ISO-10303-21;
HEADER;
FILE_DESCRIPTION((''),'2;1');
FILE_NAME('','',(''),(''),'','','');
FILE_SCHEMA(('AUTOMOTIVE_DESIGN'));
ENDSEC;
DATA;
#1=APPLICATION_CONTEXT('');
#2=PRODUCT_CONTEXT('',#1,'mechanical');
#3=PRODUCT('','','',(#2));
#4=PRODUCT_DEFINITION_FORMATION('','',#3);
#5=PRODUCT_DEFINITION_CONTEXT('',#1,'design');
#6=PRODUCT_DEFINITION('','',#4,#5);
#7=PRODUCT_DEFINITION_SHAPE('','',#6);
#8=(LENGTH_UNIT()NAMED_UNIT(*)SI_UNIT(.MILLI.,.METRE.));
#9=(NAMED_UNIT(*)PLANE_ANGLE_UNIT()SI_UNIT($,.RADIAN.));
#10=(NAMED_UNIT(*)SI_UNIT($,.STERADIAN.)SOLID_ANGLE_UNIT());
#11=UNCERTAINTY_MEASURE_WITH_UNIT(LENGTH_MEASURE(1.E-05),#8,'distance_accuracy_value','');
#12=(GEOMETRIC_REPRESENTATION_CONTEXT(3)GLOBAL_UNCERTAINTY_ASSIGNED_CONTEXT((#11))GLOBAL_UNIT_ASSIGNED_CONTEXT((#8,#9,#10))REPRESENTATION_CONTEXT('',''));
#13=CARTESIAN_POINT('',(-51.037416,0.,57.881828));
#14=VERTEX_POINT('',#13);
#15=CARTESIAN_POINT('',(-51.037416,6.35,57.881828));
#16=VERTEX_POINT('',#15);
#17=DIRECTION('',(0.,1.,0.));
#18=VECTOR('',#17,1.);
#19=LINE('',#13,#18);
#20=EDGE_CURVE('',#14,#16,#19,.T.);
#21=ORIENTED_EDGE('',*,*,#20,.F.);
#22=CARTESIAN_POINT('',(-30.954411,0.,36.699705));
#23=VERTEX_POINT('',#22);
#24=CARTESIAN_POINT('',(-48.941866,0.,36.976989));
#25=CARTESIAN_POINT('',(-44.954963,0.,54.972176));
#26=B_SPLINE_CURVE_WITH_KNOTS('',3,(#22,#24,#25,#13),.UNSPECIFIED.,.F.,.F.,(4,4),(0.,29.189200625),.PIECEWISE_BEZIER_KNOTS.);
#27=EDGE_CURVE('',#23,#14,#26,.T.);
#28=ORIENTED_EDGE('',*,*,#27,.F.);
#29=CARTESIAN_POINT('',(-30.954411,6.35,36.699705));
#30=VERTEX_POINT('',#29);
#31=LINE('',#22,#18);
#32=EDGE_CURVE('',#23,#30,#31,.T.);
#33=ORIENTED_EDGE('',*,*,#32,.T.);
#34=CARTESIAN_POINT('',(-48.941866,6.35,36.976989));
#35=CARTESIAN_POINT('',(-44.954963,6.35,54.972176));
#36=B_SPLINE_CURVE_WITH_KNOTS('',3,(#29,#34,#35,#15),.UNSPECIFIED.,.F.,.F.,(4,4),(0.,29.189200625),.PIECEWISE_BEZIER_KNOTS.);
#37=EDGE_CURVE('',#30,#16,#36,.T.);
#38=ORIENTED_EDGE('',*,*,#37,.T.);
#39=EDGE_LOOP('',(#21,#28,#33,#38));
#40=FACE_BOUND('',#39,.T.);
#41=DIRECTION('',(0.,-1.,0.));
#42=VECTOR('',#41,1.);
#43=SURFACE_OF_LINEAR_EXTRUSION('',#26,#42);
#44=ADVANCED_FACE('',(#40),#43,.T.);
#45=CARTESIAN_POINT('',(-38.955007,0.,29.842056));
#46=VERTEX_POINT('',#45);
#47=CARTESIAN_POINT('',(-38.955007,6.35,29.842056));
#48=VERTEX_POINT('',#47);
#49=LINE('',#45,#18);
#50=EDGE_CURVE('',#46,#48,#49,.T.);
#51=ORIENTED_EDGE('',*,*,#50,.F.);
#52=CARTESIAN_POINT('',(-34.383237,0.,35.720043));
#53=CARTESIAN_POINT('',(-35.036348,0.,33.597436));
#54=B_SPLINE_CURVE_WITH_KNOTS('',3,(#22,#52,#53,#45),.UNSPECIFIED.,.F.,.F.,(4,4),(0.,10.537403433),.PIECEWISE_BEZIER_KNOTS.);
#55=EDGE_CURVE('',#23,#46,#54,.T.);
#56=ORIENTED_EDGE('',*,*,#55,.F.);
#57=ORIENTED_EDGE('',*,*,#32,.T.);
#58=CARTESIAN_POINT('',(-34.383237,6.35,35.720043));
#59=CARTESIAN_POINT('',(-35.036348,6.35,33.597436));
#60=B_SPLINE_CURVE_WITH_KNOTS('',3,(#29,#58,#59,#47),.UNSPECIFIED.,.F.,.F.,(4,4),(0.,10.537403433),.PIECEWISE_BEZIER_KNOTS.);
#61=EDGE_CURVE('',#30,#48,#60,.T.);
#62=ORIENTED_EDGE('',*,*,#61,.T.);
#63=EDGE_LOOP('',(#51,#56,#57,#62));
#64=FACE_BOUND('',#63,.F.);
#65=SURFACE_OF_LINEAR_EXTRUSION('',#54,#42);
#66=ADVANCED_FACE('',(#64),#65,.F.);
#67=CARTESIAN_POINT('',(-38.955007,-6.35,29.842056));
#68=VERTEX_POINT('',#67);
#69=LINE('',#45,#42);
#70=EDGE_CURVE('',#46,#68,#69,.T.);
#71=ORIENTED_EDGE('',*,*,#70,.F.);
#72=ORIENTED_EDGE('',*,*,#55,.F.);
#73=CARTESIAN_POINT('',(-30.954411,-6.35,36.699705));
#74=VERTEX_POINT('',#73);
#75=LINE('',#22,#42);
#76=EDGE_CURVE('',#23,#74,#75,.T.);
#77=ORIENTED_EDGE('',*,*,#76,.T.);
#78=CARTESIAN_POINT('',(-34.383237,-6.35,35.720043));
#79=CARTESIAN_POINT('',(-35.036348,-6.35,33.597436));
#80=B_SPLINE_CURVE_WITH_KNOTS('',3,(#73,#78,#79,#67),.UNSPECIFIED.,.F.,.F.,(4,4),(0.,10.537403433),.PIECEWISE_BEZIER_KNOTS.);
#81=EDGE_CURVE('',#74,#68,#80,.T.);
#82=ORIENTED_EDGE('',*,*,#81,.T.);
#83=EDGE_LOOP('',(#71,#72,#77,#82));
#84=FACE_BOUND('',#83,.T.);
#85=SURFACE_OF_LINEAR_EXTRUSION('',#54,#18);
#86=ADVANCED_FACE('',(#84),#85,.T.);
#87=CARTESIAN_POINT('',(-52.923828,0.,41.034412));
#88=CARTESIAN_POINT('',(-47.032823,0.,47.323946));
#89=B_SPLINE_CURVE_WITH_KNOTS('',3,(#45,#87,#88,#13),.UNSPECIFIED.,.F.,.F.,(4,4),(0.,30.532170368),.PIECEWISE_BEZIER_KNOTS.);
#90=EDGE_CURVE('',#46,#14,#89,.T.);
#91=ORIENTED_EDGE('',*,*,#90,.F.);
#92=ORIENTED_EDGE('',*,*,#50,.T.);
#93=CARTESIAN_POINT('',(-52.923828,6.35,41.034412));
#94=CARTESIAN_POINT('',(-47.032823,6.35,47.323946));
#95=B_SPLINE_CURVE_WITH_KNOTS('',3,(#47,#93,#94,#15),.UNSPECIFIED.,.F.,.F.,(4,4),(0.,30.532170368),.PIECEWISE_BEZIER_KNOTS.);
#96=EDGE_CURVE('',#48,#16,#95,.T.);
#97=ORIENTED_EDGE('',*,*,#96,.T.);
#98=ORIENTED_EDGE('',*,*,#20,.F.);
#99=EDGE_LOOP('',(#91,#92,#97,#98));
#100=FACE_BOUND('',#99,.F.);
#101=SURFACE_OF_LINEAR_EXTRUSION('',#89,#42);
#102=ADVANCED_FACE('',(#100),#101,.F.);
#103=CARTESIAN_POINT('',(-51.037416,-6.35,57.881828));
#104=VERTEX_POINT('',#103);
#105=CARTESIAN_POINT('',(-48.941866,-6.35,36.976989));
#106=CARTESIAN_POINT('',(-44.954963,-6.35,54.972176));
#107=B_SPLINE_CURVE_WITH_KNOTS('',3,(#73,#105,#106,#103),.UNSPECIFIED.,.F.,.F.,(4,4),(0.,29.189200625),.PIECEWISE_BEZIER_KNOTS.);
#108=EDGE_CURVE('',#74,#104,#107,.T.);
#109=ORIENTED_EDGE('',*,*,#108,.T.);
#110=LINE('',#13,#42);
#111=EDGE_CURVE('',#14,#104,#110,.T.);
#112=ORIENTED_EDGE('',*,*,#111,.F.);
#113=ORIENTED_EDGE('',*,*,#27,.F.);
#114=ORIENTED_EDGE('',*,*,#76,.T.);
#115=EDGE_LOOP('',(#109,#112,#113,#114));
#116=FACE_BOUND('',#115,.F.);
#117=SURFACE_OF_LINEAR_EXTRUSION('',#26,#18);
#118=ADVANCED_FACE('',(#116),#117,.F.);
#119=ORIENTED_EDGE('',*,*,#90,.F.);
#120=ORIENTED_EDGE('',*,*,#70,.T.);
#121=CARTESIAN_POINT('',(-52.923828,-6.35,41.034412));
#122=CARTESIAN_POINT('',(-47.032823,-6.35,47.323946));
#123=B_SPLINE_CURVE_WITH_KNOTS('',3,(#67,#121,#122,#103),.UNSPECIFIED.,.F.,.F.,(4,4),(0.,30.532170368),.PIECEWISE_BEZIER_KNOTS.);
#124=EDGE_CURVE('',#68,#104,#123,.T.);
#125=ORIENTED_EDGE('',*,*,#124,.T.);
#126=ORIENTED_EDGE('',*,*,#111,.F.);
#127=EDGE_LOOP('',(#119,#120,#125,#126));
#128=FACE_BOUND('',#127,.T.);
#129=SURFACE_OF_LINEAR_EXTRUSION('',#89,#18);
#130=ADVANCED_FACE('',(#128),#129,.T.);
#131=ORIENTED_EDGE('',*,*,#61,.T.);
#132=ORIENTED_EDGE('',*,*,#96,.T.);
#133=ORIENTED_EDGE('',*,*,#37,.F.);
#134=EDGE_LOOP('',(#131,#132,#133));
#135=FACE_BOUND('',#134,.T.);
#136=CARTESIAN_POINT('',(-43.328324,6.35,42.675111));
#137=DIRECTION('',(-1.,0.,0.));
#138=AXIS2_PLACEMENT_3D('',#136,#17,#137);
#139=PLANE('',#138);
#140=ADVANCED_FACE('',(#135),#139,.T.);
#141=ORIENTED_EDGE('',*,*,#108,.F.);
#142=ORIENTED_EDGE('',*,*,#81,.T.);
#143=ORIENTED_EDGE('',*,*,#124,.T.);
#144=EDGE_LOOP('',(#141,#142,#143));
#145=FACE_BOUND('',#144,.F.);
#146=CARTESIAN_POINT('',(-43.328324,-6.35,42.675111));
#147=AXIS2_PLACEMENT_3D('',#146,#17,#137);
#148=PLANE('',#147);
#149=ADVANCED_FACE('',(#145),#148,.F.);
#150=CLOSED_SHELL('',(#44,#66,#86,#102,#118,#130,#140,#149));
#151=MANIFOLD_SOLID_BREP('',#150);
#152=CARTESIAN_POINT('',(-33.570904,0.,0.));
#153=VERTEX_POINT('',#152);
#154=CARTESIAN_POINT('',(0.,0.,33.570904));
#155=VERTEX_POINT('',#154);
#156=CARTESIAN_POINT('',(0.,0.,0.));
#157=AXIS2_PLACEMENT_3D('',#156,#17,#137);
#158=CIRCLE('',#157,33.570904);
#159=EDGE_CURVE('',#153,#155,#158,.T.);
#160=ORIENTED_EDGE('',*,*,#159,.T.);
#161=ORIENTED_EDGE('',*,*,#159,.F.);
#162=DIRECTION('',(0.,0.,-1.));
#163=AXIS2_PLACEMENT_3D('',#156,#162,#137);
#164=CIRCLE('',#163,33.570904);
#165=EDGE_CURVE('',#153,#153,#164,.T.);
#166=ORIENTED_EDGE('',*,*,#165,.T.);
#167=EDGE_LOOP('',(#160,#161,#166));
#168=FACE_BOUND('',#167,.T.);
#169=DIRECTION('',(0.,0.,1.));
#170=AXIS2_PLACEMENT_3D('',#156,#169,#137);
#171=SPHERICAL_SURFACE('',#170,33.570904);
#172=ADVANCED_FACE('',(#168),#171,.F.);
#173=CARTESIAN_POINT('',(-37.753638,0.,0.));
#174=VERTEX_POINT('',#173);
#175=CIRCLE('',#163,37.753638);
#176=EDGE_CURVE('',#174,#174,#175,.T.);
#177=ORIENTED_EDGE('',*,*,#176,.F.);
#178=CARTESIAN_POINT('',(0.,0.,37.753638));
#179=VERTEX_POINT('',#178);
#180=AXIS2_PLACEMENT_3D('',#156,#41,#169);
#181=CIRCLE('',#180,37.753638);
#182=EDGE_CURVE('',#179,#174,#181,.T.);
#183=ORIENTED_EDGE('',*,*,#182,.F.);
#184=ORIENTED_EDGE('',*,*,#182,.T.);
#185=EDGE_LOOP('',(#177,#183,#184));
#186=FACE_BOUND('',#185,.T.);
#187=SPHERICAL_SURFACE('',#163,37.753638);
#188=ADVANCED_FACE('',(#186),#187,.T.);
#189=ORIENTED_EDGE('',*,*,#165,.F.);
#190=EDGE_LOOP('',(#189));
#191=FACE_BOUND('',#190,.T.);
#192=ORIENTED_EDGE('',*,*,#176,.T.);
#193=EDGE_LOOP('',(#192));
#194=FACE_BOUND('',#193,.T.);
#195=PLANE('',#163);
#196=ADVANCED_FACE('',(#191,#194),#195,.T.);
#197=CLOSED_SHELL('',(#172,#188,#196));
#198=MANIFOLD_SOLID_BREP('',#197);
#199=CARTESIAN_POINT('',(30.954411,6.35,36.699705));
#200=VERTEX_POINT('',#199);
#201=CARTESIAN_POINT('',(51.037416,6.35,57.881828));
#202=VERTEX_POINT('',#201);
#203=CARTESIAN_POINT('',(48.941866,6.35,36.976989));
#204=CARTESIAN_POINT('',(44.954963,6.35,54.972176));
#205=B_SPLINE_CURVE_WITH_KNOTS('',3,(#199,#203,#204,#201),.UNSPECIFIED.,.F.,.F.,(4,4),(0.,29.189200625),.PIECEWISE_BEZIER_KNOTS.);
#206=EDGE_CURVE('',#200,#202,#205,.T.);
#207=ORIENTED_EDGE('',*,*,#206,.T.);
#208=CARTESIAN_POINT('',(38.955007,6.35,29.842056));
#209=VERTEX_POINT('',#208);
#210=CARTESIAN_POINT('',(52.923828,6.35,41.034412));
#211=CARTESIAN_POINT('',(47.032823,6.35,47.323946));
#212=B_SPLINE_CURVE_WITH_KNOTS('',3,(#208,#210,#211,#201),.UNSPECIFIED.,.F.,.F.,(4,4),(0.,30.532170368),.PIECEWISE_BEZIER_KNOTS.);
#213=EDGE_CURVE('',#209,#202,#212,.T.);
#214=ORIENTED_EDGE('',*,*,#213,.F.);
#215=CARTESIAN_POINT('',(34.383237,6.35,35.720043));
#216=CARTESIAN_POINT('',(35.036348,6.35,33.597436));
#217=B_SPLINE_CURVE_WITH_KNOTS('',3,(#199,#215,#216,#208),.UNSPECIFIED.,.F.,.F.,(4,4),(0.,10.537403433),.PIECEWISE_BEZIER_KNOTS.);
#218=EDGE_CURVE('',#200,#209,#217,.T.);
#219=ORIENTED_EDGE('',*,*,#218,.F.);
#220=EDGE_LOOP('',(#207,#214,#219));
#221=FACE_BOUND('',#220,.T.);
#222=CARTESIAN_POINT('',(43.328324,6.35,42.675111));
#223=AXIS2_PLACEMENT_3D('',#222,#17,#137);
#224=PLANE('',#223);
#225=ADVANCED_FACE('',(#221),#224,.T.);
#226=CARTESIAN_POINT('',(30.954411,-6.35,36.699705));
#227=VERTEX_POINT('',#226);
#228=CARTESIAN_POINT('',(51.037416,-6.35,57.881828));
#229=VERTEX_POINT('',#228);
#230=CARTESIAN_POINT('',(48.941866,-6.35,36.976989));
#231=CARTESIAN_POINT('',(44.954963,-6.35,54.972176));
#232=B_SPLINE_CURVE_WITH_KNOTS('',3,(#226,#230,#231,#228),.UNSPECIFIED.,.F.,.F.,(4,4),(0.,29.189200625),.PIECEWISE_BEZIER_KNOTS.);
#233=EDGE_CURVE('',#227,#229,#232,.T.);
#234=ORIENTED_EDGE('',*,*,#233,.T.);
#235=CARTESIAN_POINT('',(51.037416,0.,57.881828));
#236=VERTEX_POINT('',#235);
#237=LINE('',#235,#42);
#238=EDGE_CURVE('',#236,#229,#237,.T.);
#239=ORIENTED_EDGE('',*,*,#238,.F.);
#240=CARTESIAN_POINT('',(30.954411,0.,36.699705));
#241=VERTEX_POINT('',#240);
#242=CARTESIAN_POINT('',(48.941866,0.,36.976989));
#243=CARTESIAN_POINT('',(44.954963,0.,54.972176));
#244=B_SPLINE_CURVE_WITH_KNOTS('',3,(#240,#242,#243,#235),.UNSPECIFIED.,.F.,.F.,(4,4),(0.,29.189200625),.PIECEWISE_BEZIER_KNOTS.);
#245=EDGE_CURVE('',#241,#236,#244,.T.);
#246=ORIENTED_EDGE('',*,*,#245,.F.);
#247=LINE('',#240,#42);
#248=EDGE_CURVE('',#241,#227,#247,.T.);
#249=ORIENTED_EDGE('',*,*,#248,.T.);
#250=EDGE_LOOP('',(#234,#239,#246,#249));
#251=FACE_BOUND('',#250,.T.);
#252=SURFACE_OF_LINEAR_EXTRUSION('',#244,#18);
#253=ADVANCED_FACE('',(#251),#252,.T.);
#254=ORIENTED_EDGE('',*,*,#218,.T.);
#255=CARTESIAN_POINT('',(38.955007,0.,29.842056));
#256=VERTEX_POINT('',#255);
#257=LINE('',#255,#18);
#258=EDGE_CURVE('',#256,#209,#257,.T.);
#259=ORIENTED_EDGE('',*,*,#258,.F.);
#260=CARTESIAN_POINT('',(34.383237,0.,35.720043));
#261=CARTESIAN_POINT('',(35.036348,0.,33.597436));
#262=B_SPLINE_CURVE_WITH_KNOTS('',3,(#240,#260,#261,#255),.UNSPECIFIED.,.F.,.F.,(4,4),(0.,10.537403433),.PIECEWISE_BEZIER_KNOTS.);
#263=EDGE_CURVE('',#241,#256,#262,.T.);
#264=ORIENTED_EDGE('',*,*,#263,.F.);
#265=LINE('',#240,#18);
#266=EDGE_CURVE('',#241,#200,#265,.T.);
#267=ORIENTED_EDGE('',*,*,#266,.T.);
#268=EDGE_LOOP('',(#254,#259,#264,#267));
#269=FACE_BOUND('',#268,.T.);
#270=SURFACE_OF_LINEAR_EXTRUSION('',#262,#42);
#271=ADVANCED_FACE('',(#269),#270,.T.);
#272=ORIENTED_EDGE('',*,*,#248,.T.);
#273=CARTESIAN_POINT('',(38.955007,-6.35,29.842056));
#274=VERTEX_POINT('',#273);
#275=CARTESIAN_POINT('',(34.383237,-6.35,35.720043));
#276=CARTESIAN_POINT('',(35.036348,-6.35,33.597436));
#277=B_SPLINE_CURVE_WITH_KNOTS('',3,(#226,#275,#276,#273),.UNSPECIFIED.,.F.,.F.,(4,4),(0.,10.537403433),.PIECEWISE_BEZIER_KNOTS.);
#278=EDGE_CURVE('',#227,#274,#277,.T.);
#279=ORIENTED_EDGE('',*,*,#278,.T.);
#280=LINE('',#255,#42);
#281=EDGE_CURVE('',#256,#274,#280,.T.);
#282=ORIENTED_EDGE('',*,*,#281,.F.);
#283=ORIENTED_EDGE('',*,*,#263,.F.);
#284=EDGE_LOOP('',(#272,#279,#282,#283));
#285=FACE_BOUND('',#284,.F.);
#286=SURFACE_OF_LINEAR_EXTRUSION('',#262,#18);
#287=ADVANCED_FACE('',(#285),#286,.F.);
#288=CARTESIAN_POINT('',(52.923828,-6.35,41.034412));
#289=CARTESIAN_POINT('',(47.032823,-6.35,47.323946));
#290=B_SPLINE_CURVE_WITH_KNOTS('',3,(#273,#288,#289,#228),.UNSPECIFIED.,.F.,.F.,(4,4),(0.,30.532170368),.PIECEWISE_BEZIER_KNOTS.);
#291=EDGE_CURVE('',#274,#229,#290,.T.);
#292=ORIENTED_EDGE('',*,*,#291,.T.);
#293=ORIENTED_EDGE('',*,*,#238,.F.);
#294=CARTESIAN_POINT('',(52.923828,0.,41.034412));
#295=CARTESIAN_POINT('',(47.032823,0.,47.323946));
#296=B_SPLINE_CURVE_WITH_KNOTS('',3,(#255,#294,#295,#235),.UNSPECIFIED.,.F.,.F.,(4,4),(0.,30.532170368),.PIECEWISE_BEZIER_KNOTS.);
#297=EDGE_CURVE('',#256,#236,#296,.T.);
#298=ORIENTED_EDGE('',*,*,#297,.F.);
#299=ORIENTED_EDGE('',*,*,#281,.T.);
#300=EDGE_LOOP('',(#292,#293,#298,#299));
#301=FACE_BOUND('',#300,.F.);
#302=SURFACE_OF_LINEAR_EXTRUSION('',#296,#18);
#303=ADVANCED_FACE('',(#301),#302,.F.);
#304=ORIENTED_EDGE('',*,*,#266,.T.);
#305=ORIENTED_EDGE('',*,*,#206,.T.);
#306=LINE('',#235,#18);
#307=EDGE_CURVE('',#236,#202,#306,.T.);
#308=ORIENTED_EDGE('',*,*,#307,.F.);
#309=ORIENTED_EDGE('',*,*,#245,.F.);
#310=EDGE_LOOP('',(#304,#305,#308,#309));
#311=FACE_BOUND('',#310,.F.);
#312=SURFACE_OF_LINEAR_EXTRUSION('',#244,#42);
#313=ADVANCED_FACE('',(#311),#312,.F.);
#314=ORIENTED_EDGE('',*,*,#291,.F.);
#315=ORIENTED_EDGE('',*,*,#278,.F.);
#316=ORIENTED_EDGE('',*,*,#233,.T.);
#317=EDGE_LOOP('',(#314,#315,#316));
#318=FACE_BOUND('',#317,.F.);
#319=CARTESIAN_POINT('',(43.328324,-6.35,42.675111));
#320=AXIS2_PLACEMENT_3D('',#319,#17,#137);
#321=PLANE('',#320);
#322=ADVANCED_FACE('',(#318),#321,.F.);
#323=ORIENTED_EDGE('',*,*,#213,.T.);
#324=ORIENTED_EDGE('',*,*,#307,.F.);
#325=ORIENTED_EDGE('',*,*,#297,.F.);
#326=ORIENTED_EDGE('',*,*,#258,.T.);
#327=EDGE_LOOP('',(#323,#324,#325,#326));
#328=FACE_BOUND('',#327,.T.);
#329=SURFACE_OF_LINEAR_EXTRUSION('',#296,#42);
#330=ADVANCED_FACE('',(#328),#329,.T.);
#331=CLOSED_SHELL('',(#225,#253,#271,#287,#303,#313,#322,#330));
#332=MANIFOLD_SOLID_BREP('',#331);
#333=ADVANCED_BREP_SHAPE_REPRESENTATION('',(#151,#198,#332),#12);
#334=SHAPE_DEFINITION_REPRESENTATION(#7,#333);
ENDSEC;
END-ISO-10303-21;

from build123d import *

# Parameters (mm, degrees)
F3_DEPTH = 6.35


# Not quite as in the source:
# - the program builds the solid bodies; features that only make, move or delete a surface that nothing else refers to are left out


with BuildPart() as f1:
    # F0 (on Front) → F1 (revolve)
    with BuildSketch(Plane.XZ):
        with BuildLine():
            Line((0, 33.5709042847), (0, 37.7536378801))
            ThreePointArc((0, 37.7536378801), (-26.6958533595, 26.6958533595), (-37.7536378801, 0))
            Line((-37.7536378801, 0), (-33.5709042847, 0))
            ThreePointArc((-33.5709042847, 0), (-23.7382140703, 23.7382140703), (0, 33.5709042847))
        make_face()
    revolve(axis=Axis((0, 0, 18.87681894), (0, 0, -1)))


with BuildPart() as f3:
    # F2 (on Front) → F3 (new body, symmetric)
    with BuildSketch(Plane.XZ):
        with BuildLine():
            add(Edge.make_bspline(
                [(30.9544112533, 36.6997048259), (48.9418655634, 36.9769893587), (44.9549630284, 54.9721755087), (51.0374158621, 57.8818283975)],
                knots=[0, 0, 0, 0, 29.1892006249, 29.1892006249, 29.1892006249, 29.1892006249], degree=3))
            add(Edge.make_bspline(
                [(30.9544112533, 36.6997048259), (34.3832373619, 35.7200428843), (35.0363478065, 33.5974358022), (38.9550067484, 29.842056334)],
                knots=[0, 0, 0, 0, 10.5374034332, 10.5374034332, 10.5374034332, 10.5374034332], degree=3))
            add(Edge.make_bspline(
                [(38.9550067484, 29.842056334), (52.9238283634, 41.034411639), (47.0328231653, 47.3239459097), (51.0374158621, 57.8818283975)],
                knots=[0, 0, 0, 0, 30.5321703677, 30.5321703677, 30.5321703677, 30.5321703677], degree=3))
        make_face()
    extrude(amount=F3_DEPTH, both=True)


with BuildPart() as f3b:
    # F2 (on Front) → F3, piece 2 (new body, symmetric)
    with BuildSketch(Plane.XZ):
        with BuildLine():
            add(Edge.make_bspline(
                [(-38.9550067484, 29.842056334), (-52.9238283634, 41.034411639), (-47.0328231653, 47.3239459097), (-51.0374158621, 57.8818283975)],
                knots=[0, 0, 0, 0, 30.5321703677, 30.5321703677, 30.5321703677, 30.5321703677], degree=3))
            add(Edge.make_bspline(
                [(-30.9544112533, 36.6997048259), (-34.3832373619, 35.7200428843), (-35.0363478065, 33.5974358022), (-38.9550067484, 29.842056334)],
                knots=[0, 0, 0, 0, 10.5374034332, 10.5374034332, 10.5374034332, 10.5374034332], degree=3))
            add(Edge.make_bspline(
                [(-30.9544112533, 36.6997048259), (-48.9418655634, 36.9769893587), (-44.9549630284, 54.9721755087), (-51.0374158621, 57.8818283975)],
                knots=[0, 0, 0, 0, 29.1892006249, 29.1892006249, 29.1892006249, 29.1892006249], degree=3))
        make_face()
    extrude(amount=F3_DEPTH, both=True)


solid = Compound([f1.part, f3.part, f3b.part])
